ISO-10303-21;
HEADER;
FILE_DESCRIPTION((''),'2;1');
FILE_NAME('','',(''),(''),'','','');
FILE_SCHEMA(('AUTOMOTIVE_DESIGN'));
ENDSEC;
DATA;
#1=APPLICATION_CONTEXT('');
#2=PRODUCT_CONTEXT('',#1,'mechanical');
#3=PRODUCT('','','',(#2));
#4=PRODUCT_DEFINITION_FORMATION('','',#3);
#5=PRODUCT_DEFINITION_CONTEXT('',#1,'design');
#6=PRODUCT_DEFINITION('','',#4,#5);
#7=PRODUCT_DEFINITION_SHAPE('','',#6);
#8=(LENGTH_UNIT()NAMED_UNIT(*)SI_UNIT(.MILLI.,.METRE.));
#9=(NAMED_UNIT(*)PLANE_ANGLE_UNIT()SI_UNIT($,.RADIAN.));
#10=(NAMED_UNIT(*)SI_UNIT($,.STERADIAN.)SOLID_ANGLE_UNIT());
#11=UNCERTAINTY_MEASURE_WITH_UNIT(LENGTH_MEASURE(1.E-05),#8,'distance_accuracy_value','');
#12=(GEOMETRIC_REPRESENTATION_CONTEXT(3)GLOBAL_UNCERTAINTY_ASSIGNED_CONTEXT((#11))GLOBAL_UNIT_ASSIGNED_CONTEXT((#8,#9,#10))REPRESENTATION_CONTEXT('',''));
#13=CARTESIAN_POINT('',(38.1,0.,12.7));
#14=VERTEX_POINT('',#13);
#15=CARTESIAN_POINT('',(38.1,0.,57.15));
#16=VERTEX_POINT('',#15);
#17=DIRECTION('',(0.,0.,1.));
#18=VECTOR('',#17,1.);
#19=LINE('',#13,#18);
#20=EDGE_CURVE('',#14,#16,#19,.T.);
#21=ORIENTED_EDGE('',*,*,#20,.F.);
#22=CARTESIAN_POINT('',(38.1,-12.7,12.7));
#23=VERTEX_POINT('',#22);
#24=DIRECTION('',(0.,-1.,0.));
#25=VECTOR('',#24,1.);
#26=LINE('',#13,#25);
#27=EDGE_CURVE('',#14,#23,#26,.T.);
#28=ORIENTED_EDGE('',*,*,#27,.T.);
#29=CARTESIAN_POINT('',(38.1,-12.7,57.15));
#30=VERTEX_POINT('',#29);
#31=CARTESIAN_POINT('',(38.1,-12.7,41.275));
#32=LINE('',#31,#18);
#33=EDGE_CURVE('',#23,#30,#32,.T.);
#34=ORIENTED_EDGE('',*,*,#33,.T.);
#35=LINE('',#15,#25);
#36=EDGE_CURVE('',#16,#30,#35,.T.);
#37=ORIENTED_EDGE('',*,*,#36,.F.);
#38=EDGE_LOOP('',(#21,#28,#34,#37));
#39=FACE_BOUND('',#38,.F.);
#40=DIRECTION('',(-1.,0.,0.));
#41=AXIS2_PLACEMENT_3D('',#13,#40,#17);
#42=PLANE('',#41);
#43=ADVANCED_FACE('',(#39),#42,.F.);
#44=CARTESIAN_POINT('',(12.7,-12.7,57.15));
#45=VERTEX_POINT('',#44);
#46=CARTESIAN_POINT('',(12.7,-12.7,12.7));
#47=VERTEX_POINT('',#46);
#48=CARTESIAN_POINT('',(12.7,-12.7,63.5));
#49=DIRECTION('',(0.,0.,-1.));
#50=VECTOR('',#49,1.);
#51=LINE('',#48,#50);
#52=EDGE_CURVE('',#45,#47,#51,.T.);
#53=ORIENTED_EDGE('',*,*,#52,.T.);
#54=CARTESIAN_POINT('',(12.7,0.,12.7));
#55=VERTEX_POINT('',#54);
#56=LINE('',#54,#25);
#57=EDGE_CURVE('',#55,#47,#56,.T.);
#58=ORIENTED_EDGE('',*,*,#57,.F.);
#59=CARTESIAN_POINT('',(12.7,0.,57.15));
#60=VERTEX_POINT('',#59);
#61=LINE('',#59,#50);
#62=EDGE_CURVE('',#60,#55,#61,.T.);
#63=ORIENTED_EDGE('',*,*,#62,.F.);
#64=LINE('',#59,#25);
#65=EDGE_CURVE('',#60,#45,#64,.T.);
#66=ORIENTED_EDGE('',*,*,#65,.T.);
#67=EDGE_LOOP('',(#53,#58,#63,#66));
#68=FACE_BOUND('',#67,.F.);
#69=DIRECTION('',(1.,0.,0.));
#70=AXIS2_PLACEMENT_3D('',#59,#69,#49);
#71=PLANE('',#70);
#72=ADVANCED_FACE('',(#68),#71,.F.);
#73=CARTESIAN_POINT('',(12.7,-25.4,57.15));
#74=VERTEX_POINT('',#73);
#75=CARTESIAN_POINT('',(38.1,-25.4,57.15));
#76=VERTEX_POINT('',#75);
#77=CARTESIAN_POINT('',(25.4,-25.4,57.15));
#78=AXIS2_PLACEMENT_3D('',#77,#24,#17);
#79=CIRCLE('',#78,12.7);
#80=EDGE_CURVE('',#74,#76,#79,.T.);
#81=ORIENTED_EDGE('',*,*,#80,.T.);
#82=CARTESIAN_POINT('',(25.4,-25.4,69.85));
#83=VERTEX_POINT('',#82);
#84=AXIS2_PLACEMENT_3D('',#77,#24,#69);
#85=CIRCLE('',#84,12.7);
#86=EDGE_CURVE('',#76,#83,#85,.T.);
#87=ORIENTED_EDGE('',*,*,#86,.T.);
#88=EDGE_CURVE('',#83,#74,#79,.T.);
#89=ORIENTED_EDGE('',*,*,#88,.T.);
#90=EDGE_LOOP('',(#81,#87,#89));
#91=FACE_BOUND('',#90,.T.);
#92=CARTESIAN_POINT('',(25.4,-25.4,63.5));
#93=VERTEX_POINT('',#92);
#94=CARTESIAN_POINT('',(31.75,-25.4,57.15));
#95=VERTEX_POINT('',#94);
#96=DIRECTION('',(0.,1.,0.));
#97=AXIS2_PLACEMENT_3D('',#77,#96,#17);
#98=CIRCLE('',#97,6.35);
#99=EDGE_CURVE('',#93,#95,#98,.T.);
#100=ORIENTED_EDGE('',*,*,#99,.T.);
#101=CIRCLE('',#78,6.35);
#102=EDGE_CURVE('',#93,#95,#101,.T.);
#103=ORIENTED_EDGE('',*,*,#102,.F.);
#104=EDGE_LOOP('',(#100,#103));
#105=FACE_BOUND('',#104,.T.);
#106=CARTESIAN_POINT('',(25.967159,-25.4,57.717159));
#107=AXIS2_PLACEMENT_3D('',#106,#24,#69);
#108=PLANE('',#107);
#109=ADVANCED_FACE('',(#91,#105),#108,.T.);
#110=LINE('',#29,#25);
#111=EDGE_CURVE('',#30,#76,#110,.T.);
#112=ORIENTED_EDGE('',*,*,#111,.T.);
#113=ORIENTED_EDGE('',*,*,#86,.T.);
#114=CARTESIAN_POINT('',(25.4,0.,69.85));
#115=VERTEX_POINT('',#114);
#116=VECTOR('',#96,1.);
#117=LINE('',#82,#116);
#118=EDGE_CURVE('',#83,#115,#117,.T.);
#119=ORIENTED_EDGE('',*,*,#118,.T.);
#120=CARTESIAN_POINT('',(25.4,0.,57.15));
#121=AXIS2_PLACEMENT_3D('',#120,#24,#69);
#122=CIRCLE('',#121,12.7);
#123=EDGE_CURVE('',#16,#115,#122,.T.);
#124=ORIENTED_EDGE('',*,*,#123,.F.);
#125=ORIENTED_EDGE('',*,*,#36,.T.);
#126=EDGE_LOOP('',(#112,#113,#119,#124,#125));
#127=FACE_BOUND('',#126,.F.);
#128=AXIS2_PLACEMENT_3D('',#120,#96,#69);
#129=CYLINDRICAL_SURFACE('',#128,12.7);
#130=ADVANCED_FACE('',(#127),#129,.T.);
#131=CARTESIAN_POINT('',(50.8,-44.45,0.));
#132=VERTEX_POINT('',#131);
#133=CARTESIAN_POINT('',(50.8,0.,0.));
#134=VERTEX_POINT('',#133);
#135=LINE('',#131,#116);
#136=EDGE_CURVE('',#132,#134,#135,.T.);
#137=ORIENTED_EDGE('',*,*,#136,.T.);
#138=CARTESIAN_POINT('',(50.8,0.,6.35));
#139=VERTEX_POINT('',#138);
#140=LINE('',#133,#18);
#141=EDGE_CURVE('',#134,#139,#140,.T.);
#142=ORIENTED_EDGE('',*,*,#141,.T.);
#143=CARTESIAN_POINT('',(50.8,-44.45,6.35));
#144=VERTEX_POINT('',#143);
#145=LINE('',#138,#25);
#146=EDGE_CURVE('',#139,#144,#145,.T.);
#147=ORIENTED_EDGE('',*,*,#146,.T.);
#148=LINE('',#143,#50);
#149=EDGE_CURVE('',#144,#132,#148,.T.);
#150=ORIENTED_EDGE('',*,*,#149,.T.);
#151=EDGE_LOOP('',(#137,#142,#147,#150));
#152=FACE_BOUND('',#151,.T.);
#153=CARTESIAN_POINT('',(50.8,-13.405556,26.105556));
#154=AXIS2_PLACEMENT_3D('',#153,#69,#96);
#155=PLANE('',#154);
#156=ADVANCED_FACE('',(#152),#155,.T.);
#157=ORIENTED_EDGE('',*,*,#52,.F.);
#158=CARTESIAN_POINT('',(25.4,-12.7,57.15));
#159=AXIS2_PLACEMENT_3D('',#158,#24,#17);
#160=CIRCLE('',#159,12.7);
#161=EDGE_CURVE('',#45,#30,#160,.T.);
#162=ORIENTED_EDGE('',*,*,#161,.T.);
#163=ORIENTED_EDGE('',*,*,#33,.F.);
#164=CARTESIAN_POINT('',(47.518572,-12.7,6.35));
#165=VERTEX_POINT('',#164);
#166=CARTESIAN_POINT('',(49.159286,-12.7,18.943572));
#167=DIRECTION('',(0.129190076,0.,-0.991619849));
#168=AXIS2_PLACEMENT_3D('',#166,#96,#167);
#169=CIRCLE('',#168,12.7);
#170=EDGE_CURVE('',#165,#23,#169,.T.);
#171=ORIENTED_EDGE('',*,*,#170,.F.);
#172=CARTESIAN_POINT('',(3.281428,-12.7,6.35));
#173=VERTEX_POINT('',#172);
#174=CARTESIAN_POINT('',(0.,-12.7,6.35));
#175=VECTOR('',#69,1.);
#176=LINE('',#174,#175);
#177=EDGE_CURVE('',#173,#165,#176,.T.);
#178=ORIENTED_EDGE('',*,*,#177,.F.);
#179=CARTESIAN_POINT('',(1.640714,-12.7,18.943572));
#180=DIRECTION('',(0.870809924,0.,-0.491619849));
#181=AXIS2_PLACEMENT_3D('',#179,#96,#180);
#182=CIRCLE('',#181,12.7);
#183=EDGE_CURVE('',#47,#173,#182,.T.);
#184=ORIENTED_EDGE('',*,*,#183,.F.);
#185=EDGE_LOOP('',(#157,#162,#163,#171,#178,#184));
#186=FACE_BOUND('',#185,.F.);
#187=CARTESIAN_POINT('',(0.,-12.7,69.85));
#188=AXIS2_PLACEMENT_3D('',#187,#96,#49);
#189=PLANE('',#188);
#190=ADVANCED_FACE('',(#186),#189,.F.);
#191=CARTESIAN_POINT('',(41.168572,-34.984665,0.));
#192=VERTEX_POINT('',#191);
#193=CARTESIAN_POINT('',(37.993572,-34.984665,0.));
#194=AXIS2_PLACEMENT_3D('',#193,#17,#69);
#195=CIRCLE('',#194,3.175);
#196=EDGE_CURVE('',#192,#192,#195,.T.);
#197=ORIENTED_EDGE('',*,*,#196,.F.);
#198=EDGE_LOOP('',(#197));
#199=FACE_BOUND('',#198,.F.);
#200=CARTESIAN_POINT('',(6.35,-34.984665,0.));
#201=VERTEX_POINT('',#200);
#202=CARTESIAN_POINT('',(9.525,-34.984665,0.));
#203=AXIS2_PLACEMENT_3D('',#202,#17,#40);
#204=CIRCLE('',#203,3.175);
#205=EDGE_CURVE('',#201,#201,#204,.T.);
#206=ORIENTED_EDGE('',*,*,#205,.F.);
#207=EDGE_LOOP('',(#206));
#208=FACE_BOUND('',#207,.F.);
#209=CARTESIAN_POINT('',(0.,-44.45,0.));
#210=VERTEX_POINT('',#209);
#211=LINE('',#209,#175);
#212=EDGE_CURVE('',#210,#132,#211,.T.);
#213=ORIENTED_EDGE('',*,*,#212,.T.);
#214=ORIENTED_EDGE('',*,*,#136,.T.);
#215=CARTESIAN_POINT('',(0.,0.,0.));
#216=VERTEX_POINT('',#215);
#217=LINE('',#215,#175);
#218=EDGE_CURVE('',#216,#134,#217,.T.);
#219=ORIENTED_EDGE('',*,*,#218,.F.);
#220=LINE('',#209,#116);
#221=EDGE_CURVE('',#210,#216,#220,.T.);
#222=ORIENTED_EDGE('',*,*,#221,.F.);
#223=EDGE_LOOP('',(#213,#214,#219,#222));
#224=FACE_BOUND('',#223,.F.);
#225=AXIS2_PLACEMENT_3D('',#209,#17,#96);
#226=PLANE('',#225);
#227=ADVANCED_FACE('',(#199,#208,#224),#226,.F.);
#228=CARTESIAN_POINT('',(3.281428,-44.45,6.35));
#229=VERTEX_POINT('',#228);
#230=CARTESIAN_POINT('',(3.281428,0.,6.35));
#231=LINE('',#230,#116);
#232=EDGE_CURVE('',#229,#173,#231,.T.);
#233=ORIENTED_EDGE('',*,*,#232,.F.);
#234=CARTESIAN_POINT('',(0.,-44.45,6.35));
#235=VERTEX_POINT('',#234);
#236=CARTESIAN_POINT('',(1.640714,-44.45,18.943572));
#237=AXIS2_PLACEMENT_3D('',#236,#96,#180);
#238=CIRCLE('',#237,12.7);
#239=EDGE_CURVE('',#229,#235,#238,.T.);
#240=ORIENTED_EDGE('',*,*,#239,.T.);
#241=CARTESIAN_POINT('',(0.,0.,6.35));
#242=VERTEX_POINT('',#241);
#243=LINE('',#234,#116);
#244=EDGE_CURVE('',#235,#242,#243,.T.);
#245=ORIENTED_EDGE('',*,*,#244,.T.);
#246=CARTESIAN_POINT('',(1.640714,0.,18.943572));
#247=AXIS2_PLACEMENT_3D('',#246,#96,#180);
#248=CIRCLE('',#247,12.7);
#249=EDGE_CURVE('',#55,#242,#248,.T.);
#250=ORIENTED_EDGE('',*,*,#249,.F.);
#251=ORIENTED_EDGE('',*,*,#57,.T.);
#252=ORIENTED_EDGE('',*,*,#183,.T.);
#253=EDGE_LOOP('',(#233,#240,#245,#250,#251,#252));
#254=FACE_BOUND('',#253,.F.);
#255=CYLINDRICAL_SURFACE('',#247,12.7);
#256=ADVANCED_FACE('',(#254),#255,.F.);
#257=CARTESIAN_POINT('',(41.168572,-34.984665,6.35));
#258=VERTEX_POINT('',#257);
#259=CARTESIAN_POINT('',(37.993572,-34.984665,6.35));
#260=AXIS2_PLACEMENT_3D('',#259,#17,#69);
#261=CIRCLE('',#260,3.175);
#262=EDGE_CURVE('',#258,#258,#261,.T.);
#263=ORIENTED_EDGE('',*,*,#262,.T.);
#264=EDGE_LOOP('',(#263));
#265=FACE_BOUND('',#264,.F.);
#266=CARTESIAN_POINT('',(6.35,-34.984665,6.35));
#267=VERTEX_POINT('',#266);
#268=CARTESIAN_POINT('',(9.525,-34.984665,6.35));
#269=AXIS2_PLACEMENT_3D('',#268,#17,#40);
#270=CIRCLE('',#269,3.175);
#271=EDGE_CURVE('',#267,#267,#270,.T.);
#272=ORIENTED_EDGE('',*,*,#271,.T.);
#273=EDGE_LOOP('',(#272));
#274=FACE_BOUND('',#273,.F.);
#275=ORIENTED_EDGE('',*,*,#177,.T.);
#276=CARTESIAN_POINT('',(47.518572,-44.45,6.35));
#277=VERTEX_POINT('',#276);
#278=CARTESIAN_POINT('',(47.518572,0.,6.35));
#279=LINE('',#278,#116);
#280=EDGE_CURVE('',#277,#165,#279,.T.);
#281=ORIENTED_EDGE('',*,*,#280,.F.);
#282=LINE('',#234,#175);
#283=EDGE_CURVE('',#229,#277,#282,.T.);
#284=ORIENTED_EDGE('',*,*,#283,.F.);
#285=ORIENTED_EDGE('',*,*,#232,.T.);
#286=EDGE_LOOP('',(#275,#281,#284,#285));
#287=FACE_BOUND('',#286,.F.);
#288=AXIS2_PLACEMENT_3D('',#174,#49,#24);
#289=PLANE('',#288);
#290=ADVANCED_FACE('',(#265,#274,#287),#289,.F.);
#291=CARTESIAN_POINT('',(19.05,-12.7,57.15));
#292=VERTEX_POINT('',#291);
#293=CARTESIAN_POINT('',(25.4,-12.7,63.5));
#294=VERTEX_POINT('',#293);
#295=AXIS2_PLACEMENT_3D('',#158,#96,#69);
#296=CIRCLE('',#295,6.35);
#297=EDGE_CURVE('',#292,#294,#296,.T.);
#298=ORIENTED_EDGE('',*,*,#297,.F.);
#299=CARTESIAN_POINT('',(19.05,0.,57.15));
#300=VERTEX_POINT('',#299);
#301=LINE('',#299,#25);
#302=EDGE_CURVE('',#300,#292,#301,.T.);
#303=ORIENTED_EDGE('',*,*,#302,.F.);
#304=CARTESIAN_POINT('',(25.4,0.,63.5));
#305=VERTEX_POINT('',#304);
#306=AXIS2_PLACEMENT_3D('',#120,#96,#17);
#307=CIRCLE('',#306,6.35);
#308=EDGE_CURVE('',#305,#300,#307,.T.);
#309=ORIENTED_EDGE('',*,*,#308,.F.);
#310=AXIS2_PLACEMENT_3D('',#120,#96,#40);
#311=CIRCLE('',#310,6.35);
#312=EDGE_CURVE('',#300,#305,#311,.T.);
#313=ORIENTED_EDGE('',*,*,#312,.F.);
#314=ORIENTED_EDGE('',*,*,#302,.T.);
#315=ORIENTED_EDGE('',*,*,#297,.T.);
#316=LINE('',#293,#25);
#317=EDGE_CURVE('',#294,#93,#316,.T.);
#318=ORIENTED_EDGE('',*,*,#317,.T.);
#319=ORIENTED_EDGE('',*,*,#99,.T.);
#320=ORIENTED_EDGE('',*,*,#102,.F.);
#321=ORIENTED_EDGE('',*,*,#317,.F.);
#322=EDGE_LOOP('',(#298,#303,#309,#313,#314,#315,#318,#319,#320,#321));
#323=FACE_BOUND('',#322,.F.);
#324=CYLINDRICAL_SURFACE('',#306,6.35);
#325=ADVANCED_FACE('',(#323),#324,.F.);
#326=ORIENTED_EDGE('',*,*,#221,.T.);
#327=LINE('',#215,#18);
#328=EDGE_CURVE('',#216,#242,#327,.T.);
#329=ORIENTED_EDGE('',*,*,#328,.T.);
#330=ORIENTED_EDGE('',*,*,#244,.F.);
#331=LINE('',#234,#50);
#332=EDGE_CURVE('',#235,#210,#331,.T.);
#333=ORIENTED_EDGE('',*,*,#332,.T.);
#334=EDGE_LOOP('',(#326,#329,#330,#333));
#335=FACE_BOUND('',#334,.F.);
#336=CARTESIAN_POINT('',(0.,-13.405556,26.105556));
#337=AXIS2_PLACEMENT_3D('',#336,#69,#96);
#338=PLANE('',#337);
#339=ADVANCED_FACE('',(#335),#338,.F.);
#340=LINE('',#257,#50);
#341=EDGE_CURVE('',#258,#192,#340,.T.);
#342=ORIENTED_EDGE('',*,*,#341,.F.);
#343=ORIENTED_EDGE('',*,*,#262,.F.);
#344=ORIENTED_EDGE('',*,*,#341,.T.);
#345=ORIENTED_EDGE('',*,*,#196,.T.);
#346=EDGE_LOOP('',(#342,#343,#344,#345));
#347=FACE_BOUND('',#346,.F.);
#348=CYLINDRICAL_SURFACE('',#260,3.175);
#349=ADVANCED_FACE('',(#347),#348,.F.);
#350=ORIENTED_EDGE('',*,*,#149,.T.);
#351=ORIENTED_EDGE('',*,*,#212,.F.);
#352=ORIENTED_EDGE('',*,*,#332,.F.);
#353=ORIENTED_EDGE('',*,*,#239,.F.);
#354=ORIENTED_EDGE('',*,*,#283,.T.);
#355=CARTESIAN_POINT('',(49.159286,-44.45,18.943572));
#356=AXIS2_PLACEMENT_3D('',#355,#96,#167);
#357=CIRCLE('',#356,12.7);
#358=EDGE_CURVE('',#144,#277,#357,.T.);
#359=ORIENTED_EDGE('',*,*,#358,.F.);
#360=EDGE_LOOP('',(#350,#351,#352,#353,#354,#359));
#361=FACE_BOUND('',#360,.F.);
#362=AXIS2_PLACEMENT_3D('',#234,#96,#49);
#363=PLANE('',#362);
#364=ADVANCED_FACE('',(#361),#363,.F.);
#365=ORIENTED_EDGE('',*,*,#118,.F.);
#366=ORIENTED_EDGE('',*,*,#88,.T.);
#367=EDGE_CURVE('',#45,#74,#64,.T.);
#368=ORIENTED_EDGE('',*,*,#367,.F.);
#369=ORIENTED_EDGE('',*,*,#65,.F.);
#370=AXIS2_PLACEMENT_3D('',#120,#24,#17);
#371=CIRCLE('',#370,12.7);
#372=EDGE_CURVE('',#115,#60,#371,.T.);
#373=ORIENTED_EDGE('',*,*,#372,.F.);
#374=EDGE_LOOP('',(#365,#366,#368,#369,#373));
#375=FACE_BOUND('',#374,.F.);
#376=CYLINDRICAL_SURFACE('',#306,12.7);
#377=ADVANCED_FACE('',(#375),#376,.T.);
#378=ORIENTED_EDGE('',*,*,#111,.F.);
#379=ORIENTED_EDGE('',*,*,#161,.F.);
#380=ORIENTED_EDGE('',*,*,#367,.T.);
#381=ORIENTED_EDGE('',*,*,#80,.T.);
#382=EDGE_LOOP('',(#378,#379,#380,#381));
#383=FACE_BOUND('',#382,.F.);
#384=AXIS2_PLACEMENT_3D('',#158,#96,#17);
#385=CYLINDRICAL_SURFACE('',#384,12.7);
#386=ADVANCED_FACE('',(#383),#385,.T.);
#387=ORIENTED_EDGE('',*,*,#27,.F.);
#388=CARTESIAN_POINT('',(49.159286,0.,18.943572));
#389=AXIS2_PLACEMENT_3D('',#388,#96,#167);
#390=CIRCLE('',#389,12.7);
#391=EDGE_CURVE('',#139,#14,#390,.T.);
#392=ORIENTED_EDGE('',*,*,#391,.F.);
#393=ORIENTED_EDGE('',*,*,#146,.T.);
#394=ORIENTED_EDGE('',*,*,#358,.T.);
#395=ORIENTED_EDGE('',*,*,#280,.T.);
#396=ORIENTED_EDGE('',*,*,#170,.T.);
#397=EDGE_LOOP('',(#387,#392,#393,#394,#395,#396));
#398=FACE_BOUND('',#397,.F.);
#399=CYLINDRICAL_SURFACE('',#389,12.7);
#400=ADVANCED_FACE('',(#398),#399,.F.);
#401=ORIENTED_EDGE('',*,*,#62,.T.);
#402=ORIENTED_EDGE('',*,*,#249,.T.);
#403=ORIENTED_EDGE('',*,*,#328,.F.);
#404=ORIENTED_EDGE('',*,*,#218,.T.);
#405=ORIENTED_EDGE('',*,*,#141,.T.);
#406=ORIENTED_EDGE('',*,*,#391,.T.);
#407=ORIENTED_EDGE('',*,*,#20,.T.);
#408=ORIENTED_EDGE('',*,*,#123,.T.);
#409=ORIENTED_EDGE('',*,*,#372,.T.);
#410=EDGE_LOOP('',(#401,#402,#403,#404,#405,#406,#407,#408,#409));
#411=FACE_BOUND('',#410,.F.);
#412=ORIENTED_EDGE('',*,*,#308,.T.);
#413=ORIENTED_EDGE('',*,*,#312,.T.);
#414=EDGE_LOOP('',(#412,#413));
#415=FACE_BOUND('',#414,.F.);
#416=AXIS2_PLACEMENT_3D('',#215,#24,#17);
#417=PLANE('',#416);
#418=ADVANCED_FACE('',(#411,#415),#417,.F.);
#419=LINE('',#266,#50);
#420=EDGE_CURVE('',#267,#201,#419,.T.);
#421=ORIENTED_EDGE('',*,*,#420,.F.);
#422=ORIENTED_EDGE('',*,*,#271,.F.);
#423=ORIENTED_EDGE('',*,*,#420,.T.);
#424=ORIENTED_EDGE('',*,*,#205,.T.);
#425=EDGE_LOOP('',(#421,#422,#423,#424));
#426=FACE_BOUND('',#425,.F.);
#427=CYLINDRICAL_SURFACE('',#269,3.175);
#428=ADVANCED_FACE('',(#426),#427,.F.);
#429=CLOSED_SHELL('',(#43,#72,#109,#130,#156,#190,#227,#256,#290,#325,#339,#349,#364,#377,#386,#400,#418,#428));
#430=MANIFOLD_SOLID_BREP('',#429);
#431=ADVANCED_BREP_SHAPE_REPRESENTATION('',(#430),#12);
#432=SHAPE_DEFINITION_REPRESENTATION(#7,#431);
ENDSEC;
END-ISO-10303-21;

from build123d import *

# Parameters (mm, degrees)
F1_DEPTH = 50.8
F3_DEPTH = 12.7
F5_R     = 3.175
F6_DEPTH = 6.351
F8_DEPTH = 6.351
F9_DEPTH = 44.451


with BuildPart() as f1:
    # F0 (on Right) → F1 (new body)
    with BuildSketch(Plane.YZ):
        Polygon((-44.45, 0), (0, 0), (0, 69.85), (-12.7, 69.85), (-12.7, 6.35), (-44.45, 6.35), align=None)
    extrude(amount=F1_DEPTH)

    # F2 (on face) → F3 (join)
    with BuildSketch(Plane.XZ.offset(12.7)):
        with BuildLine():
            ThreePointArc((38.1, 57.15), (34.3802561211, 66.1302561211), (25.4, 69.85))
            ThreePointArc((25.4, 69.85), (16.4197438789, 48.1697438789), (38.1, 57.15))
        make_face()
        with BuildLine():
            ThreePointArc((31.75, 57.15), (20.9098719395, 52.6598719395), (25.4, 63.5))
            ThreePointArc((25.4, 63.5), (29.8901280605, 61.6401280605), (31.75, 57.15))
        make_face(mode=Mode.SUBTRACT)
    extrude(amount=F3_DEPTH)

    # F5 (on face) → F6 (cut, through all)
    with BuildSketch(Plane.XY.offset(6.35)):
        with BuildLine():
            ThreePointArc((12.7, -34.9846648967), (9.525, -31.8096648967), (6.35, -34.9846648967))
            ThreePointArc((6.35, -34.9846648967), (9.525, -38.1596648967), (12.7, -34.9846648967))
        make_face()
        with Locations((37.9935720786, -34.9846648967)):
            Circle(F5_R)
    extrude(amount=-F6_DEPTH, mode=Mode.SUBTRACT)

    # F7 (on face) → F8 (cut, through all)
    with BuildSketch(Plane.XY.offset(6.35)):
        with BuildLine():
            Line((9.525, -38.1596648967), (9.525, -34.9846648967))
            Line((9.525, -34.9846648967), (6.35, -34.9846648967))
            ThreePointArc((6.35, -34.9846648967), (7.2799359697, -37.229728927), (9.525, -38.1596648967))
        make_face()
    extrude(amount=-F8_DEPTH, mode=Mode.SUBTRACT)

    # F4 (on face) → F9 (cut, through all)
    with BuildSketch(Plane(origin=(0, 0, 0), x_dir=(-1, 0, 0), z_dir=(0, 1, 0))):
        with BuildLine():
            ThreePointArc((-50.8, 6.35), (-43.4796733765, 7.5843467529), (-38.1, 12.7))
            Line((-38.1, 12.7), (-50.8, 12.7))
            Line((-50.8, 12.7), (-50.8, 6.35))
        make_face()
        with BuildLine():
            ThreePointArc((-38.1, 57.15), (-34.3802561211, 66.1302561211), (-25.4, 69.85))
            Line((-25.4, 69.85), (-50.8, 69.85))
            Line((-50.8, 69.85), (-50.8, 12.7))
            Line((-50.8, 12.7), (-38.1, 12.7))
            Line((-38.1, 12.7), (-38.1, 57.15))
        make_face()
        with BuildLine():
            Line((0, 69.85), (-25.4, 69.85))
            ThreePointArc((-25.4, 69.85), (-16.4197438789, 66.1302561211), (-12.7, 57.15))
            Line((-12.7, 57.15), (-12.7, 12.7))
            ThreePointArc((-12.7, 12.7), (-7.3203266235, 7.5843467529), (0, 6.35))
            Line((0, 6.35), (0, 69.85))
        make_face()
        with BuildLine():
            ThreePointArc((-19.05, 57.15), (-20.9098719395, 61.6401280605), (-25.4, 63.5))
            ThreePointArc((-25.4, 63.5), (-29.8901280605, 52.6598719395), (-19.05, 57.15))
        make_face()
    extrude(amount=-F9_DEPTH, mode=Mode.SUBTRACT)


solid = f1.part
